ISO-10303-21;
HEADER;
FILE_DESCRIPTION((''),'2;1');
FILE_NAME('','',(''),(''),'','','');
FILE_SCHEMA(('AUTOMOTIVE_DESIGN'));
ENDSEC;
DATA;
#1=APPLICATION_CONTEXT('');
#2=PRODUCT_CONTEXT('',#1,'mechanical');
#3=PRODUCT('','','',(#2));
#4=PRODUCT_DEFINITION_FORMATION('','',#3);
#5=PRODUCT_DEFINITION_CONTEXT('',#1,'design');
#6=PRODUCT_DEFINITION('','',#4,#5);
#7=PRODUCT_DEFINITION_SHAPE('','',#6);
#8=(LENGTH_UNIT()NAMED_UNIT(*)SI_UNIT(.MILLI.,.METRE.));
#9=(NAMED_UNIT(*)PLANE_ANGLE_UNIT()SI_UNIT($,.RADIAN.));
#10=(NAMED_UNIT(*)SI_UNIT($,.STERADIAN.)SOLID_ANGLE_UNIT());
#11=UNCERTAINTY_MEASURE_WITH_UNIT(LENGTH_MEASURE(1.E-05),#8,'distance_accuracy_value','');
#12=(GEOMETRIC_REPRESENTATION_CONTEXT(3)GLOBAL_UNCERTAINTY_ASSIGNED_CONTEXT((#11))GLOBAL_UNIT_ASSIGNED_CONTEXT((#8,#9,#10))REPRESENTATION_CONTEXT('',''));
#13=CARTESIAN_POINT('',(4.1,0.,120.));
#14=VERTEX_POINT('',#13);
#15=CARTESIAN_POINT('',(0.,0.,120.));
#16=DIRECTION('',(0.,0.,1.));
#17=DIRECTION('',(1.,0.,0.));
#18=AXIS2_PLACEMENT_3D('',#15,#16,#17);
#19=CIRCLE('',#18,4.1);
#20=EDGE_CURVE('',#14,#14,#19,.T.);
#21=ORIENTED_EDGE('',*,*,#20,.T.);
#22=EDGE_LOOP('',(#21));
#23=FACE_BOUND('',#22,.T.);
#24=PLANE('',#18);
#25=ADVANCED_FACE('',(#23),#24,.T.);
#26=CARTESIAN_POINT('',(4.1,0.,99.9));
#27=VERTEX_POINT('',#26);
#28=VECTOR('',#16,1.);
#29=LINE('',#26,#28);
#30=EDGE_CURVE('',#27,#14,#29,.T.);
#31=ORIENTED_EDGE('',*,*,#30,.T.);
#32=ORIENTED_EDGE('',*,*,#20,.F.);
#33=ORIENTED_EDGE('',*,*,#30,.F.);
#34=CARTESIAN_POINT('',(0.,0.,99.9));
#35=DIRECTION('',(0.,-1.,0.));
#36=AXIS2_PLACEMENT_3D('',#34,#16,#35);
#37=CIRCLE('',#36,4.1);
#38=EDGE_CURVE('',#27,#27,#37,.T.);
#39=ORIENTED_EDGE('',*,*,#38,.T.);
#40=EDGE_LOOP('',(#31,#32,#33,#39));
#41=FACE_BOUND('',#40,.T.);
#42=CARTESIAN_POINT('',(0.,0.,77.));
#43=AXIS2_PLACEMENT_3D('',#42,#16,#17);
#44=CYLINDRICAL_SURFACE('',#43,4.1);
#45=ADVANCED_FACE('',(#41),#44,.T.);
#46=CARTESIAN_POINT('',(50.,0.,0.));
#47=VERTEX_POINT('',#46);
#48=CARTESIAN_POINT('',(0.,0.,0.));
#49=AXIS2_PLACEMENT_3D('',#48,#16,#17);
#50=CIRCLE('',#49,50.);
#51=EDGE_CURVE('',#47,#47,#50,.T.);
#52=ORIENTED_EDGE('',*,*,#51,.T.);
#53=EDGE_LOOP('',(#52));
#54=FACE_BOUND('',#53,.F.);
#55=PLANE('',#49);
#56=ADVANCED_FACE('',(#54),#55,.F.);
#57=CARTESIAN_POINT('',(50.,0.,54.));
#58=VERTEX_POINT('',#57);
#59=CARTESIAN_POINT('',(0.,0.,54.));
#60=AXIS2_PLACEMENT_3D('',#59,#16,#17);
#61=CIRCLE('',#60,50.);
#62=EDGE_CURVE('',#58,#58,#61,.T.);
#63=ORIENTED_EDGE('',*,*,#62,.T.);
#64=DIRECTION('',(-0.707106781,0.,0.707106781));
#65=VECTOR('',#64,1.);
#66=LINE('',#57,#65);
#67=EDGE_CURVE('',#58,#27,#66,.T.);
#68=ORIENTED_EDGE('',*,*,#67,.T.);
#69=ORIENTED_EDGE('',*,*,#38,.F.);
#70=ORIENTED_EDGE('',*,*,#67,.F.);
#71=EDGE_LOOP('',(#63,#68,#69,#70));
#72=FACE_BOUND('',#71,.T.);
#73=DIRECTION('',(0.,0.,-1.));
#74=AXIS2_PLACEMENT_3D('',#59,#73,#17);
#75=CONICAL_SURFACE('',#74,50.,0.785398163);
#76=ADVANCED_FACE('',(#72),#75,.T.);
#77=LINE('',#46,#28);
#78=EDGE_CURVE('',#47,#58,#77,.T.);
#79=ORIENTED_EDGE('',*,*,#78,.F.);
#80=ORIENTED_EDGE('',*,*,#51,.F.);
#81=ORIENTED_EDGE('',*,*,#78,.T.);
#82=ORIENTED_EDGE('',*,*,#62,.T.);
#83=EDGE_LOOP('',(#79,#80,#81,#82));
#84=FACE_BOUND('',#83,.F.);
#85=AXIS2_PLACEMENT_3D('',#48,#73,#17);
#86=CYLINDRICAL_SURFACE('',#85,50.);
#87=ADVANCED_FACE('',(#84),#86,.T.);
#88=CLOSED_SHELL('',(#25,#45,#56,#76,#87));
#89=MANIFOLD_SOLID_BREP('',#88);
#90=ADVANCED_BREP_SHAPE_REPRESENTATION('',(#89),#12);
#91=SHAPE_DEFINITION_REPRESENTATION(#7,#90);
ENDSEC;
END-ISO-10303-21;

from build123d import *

# Parameters (mm, degrees)
F0_R        = 50
F1_DEPTH    = 100
F2_R        = 4.1
F3_DEPTH    = 20
F4_S5_R     = 4.1
F4_T6_DEPTH = 76


# Not quite as in the source:
# - a fillet or chamfer that OpenCascade refuses, or shapes differently, is made with other operations: its cross-section is extruded or revolved along the edge and cut away or added


with BuildPart() as f1:
    # F0 (on Top) → F1 (new body)
    with BuildSketch(Plane.XY):
        Circle(F0_R)
    extrude(amount=F1_DEPTH)

    # F2 (on face) → F3 (join)
    with BuildSketch(Plane.XY.offset(100)):
        Circle(F2_R)
    extrude(amount=F3_DEPTH)

    # F4: chamfer of 46 on 1 edges, made by hand


with BuildPart() as f4_tool2:
    # F4_s3 → F4_t4 (revolve)
    with BuildSketch(Plane.XZ):
        Polygon((50, 54), (4, 100), (50, 100), align=None)
    revolve(axis=Axis((0, 0, 100), (0, 0, 1)))

    # F4_s5 → F4_t6 (cut, symmetric)
    with BuildSketch(Plane.XY.offset(77)):
        Circle(F4_S5_R)
    extrude(amount=F4_T6_DEPTH, both=True, mode=Mode.SUBTRACT)


with BuildPart() as f1_1:
    add(f1.part)

    # F4_t1: cut F4_tool2
    add(f4_tool2.part, mode=Mode.SUBTRACT)


solid = f1_1.part
